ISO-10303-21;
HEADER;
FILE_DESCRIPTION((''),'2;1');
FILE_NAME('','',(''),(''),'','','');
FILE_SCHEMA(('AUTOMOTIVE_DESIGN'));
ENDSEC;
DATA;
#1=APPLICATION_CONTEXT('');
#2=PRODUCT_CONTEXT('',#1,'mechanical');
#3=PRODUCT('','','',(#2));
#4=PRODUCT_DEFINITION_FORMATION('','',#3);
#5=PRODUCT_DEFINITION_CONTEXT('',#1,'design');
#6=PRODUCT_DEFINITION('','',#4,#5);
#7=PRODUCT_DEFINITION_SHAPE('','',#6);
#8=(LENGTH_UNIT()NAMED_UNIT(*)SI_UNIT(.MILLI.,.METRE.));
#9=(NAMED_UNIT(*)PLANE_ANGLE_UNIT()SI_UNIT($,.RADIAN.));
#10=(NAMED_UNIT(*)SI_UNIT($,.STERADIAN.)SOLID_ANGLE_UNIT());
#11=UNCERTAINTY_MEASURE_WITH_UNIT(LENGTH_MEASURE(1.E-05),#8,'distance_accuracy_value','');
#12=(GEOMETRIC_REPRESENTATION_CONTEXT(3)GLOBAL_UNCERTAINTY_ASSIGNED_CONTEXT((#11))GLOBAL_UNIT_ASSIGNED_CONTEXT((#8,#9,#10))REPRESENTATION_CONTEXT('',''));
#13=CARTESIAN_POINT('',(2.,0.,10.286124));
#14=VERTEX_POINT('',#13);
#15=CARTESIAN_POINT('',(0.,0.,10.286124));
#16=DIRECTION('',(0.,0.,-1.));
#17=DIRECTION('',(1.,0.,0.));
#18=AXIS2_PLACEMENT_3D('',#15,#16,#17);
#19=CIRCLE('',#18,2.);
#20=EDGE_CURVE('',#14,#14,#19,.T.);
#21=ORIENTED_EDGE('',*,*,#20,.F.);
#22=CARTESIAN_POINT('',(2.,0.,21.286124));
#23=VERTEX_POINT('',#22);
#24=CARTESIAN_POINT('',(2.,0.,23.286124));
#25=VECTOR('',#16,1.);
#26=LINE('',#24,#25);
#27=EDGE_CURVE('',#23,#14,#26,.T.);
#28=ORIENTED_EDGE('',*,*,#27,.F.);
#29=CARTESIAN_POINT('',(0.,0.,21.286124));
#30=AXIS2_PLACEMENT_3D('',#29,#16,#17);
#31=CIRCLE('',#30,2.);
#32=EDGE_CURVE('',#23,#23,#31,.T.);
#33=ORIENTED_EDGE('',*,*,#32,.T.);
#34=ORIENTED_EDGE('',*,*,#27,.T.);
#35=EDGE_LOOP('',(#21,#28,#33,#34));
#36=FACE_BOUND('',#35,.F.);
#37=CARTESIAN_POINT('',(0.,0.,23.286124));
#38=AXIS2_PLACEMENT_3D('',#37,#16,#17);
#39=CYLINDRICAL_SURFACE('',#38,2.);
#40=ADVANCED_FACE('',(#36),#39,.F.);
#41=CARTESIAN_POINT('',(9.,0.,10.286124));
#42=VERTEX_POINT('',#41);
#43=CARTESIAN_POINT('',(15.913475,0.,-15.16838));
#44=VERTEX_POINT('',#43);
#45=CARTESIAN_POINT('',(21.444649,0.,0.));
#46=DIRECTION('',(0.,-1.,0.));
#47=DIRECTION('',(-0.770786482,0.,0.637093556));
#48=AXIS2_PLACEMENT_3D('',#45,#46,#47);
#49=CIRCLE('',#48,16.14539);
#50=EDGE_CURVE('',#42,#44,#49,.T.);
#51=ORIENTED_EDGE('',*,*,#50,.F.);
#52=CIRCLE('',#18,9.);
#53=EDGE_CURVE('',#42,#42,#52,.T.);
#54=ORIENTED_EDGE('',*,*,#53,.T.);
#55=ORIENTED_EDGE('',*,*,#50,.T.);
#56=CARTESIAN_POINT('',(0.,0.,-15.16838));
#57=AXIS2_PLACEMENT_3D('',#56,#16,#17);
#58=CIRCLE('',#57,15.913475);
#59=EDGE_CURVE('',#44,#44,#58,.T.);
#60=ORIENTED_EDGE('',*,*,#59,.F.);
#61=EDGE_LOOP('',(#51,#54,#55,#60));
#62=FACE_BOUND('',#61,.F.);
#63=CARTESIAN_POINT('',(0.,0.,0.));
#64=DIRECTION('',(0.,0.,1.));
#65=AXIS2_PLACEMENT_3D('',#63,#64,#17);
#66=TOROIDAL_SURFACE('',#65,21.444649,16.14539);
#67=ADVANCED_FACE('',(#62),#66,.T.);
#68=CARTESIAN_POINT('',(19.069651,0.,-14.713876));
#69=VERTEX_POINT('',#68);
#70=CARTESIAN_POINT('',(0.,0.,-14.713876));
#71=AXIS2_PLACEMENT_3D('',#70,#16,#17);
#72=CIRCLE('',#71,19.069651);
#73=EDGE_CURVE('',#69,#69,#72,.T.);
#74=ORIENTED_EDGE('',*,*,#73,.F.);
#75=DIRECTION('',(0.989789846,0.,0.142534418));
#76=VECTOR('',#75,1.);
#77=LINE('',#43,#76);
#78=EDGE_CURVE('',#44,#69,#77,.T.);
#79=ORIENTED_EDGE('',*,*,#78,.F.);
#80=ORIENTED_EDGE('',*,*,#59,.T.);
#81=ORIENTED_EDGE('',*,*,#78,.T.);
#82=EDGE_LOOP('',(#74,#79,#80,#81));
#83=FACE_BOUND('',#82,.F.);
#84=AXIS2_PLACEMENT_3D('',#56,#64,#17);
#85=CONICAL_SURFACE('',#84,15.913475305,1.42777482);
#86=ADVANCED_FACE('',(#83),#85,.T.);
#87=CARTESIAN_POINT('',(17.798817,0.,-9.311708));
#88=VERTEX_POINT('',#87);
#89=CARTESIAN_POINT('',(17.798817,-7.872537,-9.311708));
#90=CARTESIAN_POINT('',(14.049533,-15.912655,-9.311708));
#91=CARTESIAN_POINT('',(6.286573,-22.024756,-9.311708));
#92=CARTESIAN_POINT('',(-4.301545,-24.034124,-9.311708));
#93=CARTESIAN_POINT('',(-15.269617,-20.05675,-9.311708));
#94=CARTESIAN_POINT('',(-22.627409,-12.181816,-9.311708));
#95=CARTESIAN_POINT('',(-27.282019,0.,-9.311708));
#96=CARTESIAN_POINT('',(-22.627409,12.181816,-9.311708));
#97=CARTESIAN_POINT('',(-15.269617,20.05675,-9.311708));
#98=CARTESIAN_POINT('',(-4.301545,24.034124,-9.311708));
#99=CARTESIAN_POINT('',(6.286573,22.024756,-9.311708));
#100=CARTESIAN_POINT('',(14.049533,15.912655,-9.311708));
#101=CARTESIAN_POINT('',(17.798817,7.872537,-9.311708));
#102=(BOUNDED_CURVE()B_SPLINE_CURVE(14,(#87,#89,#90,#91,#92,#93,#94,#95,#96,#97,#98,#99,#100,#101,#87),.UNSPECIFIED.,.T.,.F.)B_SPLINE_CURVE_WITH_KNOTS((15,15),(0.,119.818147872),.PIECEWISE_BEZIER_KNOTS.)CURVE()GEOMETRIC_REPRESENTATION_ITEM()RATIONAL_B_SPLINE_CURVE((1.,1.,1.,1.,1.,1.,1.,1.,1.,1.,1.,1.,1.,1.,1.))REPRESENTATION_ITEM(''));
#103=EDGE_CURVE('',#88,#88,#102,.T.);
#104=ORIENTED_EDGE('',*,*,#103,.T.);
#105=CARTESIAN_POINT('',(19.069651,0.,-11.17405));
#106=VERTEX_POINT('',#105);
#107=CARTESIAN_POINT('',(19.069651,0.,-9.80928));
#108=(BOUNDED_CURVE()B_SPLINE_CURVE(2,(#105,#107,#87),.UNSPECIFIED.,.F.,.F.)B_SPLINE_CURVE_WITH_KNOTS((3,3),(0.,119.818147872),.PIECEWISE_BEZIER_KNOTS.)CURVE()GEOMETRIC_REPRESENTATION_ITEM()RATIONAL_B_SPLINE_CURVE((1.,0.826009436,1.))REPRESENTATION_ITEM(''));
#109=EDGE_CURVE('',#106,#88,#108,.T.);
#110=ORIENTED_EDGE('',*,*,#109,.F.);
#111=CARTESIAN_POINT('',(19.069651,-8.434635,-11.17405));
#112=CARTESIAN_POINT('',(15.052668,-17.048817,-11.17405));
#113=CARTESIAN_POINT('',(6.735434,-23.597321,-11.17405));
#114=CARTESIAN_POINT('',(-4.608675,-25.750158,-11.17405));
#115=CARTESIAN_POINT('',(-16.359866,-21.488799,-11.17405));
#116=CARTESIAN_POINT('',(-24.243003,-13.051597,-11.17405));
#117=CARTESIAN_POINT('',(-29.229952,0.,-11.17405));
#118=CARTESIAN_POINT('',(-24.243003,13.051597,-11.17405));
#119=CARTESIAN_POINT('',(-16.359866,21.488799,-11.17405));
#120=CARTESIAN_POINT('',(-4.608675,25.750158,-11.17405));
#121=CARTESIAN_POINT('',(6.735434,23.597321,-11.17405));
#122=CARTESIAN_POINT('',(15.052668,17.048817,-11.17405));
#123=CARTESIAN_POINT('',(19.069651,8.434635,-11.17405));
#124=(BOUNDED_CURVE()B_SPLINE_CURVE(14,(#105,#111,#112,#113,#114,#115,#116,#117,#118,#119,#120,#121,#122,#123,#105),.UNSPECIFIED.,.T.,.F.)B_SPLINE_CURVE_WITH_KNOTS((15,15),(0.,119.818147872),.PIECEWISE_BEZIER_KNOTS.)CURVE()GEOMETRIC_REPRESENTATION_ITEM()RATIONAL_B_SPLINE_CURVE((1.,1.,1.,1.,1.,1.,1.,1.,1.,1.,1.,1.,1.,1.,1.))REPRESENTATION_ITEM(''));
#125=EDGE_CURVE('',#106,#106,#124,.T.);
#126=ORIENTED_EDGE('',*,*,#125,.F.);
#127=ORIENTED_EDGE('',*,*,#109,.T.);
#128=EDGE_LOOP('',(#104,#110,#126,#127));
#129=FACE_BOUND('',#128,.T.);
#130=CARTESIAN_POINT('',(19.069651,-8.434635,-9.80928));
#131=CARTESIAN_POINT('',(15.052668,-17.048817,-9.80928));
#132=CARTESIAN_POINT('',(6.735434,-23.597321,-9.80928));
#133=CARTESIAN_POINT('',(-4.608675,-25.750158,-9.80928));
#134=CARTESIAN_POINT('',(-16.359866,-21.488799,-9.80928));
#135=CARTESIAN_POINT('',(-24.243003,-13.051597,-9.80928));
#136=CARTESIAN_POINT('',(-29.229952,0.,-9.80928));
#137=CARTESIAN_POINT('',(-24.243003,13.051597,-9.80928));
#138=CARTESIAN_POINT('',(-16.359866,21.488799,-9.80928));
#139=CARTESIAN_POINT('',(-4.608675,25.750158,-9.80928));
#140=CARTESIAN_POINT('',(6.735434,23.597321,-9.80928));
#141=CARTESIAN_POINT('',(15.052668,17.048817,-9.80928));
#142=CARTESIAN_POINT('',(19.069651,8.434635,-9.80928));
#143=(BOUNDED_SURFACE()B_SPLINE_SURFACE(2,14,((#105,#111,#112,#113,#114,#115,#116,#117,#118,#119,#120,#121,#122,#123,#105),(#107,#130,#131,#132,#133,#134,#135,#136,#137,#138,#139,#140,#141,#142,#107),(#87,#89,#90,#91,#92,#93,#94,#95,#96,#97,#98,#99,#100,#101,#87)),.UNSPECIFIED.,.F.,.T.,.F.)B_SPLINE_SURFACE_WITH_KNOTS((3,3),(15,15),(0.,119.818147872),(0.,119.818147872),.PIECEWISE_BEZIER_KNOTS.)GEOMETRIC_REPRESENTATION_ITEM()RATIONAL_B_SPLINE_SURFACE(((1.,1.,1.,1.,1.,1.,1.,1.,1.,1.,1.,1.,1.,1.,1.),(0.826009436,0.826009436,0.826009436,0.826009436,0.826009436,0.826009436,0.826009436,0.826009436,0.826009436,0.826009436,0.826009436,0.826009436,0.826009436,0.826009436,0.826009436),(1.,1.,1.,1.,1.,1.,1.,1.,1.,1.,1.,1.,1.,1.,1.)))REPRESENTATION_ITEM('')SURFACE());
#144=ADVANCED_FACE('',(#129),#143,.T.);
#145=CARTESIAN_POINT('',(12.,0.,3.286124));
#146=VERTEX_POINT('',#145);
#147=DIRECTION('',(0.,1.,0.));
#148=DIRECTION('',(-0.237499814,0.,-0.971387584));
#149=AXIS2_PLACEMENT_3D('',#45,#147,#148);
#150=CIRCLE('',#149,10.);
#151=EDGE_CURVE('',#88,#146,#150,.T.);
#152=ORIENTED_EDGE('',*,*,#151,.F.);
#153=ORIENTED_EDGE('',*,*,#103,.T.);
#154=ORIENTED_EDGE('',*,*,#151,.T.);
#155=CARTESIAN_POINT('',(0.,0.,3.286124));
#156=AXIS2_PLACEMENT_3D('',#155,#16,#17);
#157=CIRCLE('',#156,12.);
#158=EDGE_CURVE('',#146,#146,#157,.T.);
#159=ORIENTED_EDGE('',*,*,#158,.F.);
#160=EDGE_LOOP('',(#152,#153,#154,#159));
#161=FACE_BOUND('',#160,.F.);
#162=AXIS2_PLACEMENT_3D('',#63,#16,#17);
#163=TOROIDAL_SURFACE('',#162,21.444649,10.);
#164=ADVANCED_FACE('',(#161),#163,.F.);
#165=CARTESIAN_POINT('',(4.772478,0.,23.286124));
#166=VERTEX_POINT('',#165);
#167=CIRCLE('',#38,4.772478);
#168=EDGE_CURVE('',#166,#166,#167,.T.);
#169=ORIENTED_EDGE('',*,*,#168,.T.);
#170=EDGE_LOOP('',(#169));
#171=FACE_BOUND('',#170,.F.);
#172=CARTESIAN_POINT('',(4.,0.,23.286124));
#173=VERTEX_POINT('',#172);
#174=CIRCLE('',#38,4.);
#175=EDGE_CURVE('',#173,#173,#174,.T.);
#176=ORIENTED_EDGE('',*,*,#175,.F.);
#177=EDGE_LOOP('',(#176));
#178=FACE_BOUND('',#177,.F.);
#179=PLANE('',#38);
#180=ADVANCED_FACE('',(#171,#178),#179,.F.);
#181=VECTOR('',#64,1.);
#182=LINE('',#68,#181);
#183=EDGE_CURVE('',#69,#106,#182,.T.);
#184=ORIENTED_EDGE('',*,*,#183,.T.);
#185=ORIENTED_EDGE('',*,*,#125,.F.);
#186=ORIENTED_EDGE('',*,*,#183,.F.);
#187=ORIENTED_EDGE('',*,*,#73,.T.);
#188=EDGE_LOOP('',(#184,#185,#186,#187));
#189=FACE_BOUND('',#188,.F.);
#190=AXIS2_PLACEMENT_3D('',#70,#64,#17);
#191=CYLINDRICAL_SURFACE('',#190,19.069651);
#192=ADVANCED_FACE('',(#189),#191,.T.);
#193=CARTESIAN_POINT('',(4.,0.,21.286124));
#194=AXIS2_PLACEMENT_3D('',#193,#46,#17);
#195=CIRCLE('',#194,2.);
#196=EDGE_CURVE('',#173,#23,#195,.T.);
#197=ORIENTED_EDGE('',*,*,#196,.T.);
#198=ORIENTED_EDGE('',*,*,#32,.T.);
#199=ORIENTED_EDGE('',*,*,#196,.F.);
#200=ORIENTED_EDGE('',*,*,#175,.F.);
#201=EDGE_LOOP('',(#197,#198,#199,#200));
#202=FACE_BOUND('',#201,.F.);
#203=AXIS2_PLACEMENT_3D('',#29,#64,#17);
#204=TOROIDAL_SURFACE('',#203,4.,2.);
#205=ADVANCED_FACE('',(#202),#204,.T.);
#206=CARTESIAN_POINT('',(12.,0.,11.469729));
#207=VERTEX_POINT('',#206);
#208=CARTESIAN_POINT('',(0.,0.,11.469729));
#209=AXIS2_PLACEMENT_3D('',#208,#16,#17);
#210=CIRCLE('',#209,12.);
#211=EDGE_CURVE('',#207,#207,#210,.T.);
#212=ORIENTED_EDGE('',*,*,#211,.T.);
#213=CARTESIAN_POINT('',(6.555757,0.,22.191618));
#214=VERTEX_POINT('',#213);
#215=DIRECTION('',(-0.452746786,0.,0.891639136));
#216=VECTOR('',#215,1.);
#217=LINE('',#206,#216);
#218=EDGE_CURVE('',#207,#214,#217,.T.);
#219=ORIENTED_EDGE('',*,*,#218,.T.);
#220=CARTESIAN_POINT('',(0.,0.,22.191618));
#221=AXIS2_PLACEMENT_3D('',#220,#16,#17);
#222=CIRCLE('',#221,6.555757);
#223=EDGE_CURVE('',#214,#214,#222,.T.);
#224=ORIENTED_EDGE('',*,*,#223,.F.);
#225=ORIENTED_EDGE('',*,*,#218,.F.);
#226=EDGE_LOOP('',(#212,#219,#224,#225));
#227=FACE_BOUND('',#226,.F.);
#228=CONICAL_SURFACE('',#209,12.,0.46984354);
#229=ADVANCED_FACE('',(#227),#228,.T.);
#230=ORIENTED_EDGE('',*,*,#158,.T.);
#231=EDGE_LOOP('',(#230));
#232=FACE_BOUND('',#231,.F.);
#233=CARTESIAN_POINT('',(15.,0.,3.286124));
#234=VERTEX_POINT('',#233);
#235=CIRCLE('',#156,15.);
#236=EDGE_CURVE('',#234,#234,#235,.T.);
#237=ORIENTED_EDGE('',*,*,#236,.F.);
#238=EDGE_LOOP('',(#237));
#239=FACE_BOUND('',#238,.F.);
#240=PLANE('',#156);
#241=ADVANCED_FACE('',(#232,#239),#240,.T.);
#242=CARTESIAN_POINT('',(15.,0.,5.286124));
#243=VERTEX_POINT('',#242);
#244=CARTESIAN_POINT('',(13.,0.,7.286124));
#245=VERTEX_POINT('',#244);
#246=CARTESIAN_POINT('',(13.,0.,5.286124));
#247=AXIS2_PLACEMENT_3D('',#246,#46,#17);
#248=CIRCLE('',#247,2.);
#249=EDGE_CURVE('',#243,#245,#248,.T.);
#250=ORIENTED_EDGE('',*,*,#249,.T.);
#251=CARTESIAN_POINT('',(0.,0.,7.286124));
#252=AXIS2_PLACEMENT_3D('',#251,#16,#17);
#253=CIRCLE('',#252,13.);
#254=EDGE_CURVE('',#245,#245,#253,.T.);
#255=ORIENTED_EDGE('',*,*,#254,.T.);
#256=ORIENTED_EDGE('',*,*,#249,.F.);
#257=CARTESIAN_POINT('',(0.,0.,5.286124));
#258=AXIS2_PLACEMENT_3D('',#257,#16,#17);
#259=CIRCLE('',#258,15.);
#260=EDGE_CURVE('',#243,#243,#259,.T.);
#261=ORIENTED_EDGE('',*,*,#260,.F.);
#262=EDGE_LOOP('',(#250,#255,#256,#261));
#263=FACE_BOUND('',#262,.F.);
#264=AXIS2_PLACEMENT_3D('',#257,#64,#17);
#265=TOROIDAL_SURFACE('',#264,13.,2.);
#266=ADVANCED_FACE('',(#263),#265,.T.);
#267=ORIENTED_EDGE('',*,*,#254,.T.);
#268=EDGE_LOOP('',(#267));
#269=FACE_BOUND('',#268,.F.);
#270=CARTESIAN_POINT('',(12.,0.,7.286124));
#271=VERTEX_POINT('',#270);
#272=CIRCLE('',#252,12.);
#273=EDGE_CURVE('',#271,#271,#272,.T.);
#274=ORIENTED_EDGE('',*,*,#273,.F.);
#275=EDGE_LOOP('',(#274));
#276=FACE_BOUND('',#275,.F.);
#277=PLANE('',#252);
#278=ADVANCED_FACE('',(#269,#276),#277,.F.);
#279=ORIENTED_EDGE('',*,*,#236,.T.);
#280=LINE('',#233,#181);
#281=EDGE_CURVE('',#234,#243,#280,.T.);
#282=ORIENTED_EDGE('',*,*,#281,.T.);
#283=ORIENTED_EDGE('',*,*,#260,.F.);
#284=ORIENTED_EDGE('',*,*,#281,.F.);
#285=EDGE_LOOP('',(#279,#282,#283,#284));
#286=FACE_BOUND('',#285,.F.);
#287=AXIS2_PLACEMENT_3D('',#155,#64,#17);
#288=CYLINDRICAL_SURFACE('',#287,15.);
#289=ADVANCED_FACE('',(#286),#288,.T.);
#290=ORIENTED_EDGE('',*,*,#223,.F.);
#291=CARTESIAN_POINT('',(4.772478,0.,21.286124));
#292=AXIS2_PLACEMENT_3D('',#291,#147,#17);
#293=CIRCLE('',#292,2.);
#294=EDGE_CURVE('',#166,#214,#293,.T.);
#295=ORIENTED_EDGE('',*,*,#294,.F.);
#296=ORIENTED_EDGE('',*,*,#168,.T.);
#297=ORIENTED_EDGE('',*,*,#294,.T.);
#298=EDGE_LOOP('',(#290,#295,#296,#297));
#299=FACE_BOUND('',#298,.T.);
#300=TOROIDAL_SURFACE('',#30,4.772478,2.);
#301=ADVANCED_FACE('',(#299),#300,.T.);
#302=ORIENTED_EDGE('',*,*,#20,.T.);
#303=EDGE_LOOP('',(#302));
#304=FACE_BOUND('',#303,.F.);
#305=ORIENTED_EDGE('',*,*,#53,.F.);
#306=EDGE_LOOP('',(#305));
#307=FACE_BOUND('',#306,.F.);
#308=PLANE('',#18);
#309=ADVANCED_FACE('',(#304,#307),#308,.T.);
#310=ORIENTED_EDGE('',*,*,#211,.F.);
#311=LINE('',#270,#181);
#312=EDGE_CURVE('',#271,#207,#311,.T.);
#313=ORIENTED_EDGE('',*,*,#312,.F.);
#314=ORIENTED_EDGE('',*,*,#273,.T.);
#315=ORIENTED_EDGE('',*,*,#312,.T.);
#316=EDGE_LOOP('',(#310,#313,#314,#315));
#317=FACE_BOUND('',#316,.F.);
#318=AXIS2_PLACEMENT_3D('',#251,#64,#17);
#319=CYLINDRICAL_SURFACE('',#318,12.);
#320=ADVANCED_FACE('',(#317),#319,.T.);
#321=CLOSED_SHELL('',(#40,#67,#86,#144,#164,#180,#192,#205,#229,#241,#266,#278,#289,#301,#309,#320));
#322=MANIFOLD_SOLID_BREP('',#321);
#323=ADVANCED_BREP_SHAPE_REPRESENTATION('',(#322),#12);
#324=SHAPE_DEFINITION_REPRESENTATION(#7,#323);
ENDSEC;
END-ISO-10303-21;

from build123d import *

# Parameters (mm, degrees)
F2_R = 2


with BuildPart() as f1:
    # F0 (on Front) → F1 (revolve)
    with BuildSketch(Plane.XZ):
        with BuildLine():
            Line((6, 23.2861241595), (2, 23.2861241595))
            Line((2, 23.2861241595), (2, 10.2861241595))
            Line((2, 10.2861241595), (9, 10.2861241595))
            ThreePointArc((9, 10.2861241595), (5.8637151227, -4.2318011179), (15.9134753048, -15.1683799922))
            Line((15.9134753048, -15.1683799922), (19.069650506, -14.7138758405))
            Line((19.069650506, -14.7138758405), (19.069650506, -9.7138758405))
            ThreePointArc((19.069650506, -9.7138758405), (12.6596607378, -4.7774457074), (12, 3.2861241595))
            Line((12, 3.2861241595), (15, 3.2861241595))
            Line((15, 3.2861241595), (15, 7.2861241595))
            Line((15, 7.2861241595), (12, 7.2861241595))
            Line((12, 7.2861241595), (12, 11.4697292447))
            Line((12, 11.4697292447), (6, 23.2861241595))
        make_face()
    revolve(axis=Axis((0, 0, 7.4588055012), (0, 0, -1)))

    # F2
    f2_edges = [f1.edges().sort_by_distance(p)[0] for p in [
        (-15, 0, 7.286124),
        (-19.069651, 0, -9.713876),
        (-6, 0, 23.286124),
        (-2, 0, 23.286124),
    ]]
    fillet(f2_edges, radius=F2_R)


solid = f1.part
